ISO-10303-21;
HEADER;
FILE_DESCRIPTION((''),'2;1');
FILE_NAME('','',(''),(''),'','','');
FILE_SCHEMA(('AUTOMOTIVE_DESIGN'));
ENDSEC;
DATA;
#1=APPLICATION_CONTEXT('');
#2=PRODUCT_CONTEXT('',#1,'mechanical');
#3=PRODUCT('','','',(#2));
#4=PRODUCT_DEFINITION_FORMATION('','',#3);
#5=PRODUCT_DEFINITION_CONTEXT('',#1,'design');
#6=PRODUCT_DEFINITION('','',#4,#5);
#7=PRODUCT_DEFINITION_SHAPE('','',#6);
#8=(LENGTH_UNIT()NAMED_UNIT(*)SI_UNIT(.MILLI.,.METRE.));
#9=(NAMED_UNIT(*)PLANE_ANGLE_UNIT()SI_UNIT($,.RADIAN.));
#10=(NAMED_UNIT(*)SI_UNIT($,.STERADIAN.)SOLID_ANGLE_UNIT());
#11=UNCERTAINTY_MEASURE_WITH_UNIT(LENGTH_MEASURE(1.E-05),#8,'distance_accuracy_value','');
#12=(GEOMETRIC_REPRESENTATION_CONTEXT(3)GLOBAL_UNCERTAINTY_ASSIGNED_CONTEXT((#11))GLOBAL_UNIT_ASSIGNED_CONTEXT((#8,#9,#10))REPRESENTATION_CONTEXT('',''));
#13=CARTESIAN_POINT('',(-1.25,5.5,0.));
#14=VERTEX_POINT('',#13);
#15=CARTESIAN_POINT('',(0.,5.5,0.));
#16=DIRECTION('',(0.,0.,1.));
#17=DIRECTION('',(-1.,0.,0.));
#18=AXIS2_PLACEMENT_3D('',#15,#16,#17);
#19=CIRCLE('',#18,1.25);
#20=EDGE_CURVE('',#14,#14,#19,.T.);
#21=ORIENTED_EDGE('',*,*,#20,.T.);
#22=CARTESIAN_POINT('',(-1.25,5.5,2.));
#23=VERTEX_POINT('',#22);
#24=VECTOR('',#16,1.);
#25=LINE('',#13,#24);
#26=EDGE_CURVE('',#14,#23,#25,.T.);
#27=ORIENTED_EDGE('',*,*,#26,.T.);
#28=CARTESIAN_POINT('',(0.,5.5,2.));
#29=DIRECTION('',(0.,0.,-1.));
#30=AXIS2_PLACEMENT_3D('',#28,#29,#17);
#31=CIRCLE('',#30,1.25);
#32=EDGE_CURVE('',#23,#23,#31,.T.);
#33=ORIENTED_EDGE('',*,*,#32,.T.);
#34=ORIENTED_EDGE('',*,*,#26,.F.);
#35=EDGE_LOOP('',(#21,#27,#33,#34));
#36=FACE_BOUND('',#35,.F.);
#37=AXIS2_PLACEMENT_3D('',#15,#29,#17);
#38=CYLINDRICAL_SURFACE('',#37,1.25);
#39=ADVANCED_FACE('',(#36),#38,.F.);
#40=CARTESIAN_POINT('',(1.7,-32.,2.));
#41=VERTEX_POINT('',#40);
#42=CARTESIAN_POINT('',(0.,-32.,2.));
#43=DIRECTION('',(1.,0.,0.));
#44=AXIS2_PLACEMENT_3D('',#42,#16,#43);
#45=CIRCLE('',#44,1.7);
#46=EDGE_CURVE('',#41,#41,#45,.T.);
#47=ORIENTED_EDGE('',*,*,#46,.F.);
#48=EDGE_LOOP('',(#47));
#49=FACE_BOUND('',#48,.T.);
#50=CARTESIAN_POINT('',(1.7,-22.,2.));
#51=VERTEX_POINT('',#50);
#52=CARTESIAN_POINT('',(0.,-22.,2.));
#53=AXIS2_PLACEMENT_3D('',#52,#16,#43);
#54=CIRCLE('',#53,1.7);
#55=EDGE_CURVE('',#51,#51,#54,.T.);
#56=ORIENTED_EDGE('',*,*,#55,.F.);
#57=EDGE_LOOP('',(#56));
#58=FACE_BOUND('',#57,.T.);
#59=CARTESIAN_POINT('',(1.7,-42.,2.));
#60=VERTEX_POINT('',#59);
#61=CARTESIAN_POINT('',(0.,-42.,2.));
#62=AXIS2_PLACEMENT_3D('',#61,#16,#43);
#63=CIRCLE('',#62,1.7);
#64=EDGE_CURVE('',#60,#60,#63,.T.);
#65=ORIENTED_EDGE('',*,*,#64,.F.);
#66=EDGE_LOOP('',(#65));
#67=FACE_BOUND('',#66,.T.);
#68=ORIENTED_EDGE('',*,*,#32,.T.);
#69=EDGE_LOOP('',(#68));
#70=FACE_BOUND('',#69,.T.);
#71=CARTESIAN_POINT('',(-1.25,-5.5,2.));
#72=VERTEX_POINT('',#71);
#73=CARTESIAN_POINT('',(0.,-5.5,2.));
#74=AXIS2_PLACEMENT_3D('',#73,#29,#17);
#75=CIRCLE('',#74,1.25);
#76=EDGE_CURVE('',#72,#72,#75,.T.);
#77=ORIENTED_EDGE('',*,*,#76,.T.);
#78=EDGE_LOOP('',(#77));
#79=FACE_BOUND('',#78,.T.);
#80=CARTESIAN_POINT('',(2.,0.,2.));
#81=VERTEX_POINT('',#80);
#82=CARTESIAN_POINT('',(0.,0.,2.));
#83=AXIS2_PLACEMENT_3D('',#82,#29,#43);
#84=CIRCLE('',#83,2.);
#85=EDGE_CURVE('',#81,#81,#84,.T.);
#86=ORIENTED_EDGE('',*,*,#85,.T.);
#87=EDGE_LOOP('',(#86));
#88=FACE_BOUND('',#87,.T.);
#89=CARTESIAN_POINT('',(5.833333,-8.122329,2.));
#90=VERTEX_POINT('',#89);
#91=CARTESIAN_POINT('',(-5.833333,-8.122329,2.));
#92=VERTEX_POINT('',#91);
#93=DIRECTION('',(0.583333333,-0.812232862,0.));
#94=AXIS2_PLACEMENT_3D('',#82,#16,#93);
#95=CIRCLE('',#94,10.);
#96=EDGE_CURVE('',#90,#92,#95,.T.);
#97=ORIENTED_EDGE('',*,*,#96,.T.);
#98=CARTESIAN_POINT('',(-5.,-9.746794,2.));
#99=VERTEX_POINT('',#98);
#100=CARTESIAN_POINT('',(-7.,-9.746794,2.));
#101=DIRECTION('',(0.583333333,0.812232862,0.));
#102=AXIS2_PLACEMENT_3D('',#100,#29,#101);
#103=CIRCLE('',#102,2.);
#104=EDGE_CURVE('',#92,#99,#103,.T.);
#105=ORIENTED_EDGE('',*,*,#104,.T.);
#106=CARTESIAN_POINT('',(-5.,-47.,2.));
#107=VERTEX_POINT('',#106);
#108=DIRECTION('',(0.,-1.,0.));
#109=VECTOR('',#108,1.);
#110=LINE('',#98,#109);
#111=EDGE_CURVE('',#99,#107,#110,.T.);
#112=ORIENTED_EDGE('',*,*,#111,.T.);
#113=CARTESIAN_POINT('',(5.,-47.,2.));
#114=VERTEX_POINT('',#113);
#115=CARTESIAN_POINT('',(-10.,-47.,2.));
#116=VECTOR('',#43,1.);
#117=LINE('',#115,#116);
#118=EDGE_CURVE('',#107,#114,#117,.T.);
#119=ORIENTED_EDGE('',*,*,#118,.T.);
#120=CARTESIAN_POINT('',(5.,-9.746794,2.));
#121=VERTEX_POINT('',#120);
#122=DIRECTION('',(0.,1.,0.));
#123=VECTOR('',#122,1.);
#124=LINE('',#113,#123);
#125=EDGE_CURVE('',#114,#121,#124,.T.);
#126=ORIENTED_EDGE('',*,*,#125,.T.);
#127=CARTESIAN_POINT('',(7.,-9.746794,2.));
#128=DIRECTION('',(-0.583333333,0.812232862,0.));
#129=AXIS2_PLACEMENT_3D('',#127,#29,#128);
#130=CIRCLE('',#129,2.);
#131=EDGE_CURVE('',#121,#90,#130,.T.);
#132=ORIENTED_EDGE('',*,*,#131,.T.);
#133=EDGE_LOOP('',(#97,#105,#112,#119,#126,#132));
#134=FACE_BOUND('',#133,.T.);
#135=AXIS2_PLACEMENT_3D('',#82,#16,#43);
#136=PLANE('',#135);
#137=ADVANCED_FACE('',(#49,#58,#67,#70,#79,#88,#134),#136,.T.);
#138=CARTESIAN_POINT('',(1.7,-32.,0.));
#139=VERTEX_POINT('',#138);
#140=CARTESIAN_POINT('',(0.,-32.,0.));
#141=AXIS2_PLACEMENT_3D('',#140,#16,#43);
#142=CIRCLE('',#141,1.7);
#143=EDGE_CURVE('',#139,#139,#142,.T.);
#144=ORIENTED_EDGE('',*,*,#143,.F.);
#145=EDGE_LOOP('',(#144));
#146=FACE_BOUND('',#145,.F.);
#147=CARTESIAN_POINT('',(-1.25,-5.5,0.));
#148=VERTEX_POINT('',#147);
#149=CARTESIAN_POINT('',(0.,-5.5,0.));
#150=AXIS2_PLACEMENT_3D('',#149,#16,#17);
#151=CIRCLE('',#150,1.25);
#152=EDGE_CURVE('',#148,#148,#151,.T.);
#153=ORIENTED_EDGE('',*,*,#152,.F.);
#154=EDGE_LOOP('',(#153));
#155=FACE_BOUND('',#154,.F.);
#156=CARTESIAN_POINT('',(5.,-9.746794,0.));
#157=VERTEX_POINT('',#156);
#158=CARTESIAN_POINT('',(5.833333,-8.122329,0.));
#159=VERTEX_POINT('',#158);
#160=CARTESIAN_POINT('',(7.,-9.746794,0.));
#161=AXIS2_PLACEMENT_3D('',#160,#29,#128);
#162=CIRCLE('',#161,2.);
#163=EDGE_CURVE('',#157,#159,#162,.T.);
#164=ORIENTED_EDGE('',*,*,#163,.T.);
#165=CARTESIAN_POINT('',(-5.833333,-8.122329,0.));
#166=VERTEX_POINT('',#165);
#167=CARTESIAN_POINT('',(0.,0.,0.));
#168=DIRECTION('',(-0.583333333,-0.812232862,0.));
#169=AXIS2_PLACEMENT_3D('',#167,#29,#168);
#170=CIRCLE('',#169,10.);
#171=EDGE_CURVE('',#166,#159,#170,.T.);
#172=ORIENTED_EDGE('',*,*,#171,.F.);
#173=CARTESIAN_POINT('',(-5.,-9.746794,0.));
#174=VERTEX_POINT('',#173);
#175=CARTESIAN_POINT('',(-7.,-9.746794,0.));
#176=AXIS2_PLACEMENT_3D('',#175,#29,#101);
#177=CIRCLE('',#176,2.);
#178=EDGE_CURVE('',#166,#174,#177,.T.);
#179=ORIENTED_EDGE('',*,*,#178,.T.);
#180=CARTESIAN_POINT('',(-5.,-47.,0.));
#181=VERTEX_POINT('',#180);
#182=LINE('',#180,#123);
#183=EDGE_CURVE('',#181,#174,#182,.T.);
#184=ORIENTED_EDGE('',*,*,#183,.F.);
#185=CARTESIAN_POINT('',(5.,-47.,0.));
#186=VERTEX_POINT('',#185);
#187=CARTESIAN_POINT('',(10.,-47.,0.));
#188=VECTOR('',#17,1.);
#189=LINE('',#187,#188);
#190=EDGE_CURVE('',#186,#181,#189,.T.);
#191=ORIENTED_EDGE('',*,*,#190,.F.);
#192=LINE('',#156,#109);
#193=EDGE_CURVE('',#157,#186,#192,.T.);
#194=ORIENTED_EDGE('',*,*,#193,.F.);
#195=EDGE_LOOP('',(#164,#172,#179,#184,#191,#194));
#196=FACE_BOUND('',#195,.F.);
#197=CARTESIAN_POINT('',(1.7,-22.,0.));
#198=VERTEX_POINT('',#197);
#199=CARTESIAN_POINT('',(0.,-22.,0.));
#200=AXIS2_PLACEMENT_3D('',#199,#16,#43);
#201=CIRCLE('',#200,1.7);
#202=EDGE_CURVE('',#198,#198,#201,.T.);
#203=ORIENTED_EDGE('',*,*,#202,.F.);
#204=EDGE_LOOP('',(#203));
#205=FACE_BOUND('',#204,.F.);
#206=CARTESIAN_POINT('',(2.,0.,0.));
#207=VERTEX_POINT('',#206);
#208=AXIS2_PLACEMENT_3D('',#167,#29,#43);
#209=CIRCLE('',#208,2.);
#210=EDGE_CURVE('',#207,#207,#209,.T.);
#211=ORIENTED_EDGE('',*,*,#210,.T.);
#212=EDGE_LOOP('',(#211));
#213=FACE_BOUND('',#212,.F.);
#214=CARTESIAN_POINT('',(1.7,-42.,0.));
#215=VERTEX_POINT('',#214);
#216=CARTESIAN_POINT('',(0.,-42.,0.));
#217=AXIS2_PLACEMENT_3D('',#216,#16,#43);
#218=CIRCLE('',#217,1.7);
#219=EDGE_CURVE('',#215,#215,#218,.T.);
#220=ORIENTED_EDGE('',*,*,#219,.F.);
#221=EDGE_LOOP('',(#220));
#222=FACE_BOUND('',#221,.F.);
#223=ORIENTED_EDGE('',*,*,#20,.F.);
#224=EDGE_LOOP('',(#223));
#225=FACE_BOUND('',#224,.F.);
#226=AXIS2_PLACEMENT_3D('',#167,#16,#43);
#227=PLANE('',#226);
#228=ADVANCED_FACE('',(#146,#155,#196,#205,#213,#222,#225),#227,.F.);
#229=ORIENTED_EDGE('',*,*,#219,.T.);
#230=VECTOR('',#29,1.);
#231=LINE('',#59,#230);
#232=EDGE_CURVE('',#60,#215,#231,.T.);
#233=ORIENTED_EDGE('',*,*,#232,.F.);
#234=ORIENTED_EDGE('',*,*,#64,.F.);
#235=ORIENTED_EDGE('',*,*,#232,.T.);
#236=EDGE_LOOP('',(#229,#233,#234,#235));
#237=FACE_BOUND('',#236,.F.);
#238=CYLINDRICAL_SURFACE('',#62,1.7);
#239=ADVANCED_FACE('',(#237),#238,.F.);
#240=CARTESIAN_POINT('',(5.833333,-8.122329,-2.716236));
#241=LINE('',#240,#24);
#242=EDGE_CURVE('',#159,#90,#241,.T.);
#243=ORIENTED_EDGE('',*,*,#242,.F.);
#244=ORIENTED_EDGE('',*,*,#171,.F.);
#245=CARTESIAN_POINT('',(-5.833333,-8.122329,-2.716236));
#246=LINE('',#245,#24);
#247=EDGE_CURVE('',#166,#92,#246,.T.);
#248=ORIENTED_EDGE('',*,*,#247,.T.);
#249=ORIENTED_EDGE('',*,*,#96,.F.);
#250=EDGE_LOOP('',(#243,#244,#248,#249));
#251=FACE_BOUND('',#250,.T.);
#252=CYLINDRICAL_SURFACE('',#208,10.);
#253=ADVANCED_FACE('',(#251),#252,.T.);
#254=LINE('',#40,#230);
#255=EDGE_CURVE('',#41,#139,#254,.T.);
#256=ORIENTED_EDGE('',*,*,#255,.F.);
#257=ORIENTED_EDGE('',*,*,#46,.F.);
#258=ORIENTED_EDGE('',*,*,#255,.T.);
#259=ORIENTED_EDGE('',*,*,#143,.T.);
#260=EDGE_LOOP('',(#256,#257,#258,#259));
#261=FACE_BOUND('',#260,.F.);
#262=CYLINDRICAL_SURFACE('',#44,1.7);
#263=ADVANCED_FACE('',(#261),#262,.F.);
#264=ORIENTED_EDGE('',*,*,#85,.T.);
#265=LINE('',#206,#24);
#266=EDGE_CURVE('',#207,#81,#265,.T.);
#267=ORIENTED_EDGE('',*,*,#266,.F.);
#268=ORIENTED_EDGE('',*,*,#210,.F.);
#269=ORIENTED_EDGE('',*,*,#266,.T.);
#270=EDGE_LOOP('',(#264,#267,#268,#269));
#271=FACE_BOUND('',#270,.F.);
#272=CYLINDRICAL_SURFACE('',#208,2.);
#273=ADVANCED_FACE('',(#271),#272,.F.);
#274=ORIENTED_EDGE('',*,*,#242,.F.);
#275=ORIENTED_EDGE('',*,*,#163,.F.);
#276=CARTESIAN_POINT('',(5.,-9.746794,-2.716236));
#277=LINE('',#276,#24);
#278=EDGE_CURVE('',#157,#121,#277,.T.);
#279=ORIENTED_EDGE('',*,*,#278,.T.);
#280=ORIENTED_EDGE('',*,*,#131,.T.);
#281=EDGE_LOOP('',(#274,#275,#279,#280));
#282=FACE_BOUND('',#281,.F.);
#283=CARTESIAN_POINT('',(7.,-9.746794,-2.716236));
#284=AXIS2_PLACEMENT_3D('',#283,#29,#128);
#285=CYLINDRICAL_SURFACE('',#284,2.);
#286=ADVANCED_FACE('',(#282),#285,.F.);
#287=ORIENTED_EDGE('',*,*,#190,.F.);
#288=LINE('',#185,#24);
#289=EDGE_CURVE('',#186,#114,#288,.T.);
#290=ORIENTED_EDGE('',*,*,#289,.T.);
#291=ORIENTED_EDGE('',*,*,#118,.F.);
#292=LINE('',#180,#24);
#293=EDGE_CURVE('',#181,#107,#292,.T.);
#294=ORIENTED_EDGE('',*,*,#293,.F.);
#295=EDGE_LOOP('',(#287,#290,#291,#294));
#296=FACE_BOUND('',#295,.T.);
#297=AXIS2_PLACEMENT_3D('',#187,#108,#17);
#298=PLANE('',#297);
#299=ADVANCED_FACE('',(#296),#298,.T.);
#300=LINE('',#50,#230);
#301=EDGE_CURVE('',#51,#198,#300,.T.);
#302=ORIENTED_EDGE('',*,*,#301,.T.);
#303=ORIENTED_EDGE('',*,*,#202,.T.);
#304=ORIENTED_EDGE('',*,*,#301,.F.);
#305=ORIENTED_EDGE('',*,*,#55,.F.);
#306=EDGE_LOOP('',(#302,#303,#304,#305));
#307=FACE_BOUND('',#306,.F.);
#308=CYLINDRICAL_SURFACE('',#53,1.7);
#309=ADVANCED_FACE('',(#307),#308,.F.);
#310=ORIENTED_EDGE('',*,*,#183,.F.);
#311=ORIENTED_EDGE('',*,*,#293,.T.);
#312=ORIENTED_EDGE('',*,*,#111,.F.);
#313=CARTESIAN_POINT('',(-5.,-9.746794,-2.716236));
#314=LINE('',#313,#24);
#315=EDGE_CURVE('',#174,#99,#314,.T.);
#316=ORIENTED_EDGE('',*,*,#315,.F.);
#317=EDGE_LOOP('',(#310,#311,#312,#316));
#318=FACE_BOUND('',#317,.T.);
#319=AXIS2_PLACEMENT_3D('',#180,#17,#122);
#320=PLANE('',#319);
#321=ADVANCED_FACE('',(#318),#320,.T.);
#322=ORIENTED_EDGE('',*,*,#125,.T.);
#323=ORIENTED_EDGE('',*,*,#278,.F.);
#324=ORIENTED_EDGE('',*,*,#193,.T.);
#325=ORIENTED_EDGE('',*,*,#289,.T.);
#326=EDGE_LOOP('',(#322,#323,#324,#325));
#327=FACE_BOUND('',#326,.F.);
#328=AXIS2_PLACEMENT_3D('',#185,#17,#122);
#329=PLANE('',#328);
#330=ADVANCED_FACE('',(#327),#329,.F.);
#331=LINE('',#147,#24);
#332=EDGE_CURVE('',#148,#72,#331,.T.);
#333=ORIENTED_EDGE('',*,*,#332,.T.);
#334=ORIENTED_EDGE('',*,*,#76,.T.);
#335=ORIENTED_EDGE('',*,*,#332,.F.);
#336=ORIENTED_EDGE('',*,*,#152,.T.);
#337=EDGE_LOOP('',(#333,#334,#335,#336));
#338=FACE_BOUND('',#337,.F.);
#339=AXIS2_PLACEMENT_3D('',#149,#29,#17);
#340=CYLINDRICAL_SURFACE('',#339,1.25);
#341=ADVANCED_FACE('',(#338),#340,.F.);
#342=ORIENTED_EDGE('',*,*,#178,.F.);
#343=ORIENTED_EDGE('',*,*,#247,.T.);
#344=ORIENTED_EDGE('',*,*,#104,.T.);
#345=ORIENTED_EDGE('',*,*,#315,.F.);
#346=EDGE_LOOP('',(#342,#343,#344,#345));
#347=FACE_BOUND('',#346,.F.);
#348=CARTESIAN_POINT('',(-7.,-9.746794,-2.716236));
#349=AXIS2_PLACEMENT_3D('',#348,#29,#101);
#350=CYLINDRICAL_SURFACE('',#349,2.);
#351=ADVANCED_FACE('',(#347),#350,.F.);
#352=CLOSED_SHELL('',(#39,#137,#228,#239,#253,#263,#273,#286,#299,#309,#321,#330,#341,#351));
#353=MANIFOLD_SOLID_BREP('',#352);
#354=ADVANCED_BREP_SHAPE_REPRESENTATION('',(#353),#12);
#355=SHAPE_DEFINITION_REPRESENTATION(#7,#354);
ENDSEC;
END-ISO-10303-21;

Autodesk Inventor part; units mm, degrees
ref_plane "YZ Plane" through (0, 0, 0) normal (1, 0, 0) x (0, 1, 0)
ref_plane "XZ Plane" through (0, 0, 0) normal (0, 1, 0) x (-1, 0, 0)
ref_plane "XY Plane" through (0, 0, 0) normal (0, 0, 1) x (1, 0, 0)
sketch "スケッチ1" plane through (0, 0, 0) normal (0, 0, 1) x (1, 0, 0)
  circle A0 centre (0, 0) radius 10
  circle A1 centre (0, 0) radius 2
  line L0 (0, -2) -> (0, -47)
  line L1 (10, 0) -> (10, -47)
  line L2 (10, -47) -> (-10, -47)
  line L3 (-10, -47) -> (-10, 0)
  circle A2 centre (0, -32) radius 1
  circle A3 centre (0, -42) radius 1
  circle A4 centre (0, -22) radius 1
  dimension "d1" = 4
  dimension "d0" = 20
  dimension "d2" = 45
  dimension "d9" = 2
  dimension "d10" = 2
  dimension "d11" = 2
  dimension "d31" = 10
  dimension "d32" = 22
extrude "押し出し1" add sketch "スケッチ1" along normal blind 2
sketch "スケッチ2" plane through (0, 0, 2) normal (0, 0, 1) x (1, 0, 0)
  circle A0 centre (0, -32) radius 1.7
  circle A1 centre (0, -22) radius 1.7
  circle A2 centre (0, -42) radius 1.7
  point P0 (0, 0)
  dimension "d12" = 3.4
  dimension "d13" = 3.4
  dimension "d14" = 3.4
extrude "押し出し2" cut sketch "スケッチ2" against normal blind 10
sketch "スケッチ3" plane through (0, 0, 0) normal (0, 0, -1) x (-1, 0, 0)
  line L0 (10, -47) -> (-10, -47) projected
  line L1 (10, -47) -> (5, -47)
  circle A0 centre (0, 0) radius 10
  line L2 (5, -47) -> (5, -8.6603)
  line L3 (10, 0) -> (10, -47) projected
  line L4 (10, -47) -> (10, 0)
  line L5 (-10, -47) -> (-10, 0) projected
  line L6 (-10, 0) -> (-10, -47)
  line L7 (-10, -47) -> (-5, -47)
  line L8 (-5, -47) -> (-5, -8.6603)
  dimension "d17" = 5
  dimension "d18" = 5
extrude "押し出し3" cut sketch "スケッチ3" against normal blind 10 contours L0 L2 A0 L3 | L0 L5 A0 L8
sketch "スケッチ4" plane through (0, 0, 0) normal (0, 0, -1) x (-1, 0, 0)
  circle A0 centre (0, 0) radius 5.5
  circle A1 centre (0, -5.5) radius 1.25
  circle A2 centre (0, 5.5) radius 1.25
  dimension "d21" = 11
  dimension "d22" = 2.5
  dimension "d23" = 2.5
extrude "押し出し4" cut sketch "スケッチ4" against normal blind 10 contours A2 A0 | A0 A2 | A1 A0 | A0 A1
fillet "フィレット1" radius 2 2 edges at (5, -8.6603, 1) (-5, -8.6603, 1)
properties part number "cutter_board_for_stl"
